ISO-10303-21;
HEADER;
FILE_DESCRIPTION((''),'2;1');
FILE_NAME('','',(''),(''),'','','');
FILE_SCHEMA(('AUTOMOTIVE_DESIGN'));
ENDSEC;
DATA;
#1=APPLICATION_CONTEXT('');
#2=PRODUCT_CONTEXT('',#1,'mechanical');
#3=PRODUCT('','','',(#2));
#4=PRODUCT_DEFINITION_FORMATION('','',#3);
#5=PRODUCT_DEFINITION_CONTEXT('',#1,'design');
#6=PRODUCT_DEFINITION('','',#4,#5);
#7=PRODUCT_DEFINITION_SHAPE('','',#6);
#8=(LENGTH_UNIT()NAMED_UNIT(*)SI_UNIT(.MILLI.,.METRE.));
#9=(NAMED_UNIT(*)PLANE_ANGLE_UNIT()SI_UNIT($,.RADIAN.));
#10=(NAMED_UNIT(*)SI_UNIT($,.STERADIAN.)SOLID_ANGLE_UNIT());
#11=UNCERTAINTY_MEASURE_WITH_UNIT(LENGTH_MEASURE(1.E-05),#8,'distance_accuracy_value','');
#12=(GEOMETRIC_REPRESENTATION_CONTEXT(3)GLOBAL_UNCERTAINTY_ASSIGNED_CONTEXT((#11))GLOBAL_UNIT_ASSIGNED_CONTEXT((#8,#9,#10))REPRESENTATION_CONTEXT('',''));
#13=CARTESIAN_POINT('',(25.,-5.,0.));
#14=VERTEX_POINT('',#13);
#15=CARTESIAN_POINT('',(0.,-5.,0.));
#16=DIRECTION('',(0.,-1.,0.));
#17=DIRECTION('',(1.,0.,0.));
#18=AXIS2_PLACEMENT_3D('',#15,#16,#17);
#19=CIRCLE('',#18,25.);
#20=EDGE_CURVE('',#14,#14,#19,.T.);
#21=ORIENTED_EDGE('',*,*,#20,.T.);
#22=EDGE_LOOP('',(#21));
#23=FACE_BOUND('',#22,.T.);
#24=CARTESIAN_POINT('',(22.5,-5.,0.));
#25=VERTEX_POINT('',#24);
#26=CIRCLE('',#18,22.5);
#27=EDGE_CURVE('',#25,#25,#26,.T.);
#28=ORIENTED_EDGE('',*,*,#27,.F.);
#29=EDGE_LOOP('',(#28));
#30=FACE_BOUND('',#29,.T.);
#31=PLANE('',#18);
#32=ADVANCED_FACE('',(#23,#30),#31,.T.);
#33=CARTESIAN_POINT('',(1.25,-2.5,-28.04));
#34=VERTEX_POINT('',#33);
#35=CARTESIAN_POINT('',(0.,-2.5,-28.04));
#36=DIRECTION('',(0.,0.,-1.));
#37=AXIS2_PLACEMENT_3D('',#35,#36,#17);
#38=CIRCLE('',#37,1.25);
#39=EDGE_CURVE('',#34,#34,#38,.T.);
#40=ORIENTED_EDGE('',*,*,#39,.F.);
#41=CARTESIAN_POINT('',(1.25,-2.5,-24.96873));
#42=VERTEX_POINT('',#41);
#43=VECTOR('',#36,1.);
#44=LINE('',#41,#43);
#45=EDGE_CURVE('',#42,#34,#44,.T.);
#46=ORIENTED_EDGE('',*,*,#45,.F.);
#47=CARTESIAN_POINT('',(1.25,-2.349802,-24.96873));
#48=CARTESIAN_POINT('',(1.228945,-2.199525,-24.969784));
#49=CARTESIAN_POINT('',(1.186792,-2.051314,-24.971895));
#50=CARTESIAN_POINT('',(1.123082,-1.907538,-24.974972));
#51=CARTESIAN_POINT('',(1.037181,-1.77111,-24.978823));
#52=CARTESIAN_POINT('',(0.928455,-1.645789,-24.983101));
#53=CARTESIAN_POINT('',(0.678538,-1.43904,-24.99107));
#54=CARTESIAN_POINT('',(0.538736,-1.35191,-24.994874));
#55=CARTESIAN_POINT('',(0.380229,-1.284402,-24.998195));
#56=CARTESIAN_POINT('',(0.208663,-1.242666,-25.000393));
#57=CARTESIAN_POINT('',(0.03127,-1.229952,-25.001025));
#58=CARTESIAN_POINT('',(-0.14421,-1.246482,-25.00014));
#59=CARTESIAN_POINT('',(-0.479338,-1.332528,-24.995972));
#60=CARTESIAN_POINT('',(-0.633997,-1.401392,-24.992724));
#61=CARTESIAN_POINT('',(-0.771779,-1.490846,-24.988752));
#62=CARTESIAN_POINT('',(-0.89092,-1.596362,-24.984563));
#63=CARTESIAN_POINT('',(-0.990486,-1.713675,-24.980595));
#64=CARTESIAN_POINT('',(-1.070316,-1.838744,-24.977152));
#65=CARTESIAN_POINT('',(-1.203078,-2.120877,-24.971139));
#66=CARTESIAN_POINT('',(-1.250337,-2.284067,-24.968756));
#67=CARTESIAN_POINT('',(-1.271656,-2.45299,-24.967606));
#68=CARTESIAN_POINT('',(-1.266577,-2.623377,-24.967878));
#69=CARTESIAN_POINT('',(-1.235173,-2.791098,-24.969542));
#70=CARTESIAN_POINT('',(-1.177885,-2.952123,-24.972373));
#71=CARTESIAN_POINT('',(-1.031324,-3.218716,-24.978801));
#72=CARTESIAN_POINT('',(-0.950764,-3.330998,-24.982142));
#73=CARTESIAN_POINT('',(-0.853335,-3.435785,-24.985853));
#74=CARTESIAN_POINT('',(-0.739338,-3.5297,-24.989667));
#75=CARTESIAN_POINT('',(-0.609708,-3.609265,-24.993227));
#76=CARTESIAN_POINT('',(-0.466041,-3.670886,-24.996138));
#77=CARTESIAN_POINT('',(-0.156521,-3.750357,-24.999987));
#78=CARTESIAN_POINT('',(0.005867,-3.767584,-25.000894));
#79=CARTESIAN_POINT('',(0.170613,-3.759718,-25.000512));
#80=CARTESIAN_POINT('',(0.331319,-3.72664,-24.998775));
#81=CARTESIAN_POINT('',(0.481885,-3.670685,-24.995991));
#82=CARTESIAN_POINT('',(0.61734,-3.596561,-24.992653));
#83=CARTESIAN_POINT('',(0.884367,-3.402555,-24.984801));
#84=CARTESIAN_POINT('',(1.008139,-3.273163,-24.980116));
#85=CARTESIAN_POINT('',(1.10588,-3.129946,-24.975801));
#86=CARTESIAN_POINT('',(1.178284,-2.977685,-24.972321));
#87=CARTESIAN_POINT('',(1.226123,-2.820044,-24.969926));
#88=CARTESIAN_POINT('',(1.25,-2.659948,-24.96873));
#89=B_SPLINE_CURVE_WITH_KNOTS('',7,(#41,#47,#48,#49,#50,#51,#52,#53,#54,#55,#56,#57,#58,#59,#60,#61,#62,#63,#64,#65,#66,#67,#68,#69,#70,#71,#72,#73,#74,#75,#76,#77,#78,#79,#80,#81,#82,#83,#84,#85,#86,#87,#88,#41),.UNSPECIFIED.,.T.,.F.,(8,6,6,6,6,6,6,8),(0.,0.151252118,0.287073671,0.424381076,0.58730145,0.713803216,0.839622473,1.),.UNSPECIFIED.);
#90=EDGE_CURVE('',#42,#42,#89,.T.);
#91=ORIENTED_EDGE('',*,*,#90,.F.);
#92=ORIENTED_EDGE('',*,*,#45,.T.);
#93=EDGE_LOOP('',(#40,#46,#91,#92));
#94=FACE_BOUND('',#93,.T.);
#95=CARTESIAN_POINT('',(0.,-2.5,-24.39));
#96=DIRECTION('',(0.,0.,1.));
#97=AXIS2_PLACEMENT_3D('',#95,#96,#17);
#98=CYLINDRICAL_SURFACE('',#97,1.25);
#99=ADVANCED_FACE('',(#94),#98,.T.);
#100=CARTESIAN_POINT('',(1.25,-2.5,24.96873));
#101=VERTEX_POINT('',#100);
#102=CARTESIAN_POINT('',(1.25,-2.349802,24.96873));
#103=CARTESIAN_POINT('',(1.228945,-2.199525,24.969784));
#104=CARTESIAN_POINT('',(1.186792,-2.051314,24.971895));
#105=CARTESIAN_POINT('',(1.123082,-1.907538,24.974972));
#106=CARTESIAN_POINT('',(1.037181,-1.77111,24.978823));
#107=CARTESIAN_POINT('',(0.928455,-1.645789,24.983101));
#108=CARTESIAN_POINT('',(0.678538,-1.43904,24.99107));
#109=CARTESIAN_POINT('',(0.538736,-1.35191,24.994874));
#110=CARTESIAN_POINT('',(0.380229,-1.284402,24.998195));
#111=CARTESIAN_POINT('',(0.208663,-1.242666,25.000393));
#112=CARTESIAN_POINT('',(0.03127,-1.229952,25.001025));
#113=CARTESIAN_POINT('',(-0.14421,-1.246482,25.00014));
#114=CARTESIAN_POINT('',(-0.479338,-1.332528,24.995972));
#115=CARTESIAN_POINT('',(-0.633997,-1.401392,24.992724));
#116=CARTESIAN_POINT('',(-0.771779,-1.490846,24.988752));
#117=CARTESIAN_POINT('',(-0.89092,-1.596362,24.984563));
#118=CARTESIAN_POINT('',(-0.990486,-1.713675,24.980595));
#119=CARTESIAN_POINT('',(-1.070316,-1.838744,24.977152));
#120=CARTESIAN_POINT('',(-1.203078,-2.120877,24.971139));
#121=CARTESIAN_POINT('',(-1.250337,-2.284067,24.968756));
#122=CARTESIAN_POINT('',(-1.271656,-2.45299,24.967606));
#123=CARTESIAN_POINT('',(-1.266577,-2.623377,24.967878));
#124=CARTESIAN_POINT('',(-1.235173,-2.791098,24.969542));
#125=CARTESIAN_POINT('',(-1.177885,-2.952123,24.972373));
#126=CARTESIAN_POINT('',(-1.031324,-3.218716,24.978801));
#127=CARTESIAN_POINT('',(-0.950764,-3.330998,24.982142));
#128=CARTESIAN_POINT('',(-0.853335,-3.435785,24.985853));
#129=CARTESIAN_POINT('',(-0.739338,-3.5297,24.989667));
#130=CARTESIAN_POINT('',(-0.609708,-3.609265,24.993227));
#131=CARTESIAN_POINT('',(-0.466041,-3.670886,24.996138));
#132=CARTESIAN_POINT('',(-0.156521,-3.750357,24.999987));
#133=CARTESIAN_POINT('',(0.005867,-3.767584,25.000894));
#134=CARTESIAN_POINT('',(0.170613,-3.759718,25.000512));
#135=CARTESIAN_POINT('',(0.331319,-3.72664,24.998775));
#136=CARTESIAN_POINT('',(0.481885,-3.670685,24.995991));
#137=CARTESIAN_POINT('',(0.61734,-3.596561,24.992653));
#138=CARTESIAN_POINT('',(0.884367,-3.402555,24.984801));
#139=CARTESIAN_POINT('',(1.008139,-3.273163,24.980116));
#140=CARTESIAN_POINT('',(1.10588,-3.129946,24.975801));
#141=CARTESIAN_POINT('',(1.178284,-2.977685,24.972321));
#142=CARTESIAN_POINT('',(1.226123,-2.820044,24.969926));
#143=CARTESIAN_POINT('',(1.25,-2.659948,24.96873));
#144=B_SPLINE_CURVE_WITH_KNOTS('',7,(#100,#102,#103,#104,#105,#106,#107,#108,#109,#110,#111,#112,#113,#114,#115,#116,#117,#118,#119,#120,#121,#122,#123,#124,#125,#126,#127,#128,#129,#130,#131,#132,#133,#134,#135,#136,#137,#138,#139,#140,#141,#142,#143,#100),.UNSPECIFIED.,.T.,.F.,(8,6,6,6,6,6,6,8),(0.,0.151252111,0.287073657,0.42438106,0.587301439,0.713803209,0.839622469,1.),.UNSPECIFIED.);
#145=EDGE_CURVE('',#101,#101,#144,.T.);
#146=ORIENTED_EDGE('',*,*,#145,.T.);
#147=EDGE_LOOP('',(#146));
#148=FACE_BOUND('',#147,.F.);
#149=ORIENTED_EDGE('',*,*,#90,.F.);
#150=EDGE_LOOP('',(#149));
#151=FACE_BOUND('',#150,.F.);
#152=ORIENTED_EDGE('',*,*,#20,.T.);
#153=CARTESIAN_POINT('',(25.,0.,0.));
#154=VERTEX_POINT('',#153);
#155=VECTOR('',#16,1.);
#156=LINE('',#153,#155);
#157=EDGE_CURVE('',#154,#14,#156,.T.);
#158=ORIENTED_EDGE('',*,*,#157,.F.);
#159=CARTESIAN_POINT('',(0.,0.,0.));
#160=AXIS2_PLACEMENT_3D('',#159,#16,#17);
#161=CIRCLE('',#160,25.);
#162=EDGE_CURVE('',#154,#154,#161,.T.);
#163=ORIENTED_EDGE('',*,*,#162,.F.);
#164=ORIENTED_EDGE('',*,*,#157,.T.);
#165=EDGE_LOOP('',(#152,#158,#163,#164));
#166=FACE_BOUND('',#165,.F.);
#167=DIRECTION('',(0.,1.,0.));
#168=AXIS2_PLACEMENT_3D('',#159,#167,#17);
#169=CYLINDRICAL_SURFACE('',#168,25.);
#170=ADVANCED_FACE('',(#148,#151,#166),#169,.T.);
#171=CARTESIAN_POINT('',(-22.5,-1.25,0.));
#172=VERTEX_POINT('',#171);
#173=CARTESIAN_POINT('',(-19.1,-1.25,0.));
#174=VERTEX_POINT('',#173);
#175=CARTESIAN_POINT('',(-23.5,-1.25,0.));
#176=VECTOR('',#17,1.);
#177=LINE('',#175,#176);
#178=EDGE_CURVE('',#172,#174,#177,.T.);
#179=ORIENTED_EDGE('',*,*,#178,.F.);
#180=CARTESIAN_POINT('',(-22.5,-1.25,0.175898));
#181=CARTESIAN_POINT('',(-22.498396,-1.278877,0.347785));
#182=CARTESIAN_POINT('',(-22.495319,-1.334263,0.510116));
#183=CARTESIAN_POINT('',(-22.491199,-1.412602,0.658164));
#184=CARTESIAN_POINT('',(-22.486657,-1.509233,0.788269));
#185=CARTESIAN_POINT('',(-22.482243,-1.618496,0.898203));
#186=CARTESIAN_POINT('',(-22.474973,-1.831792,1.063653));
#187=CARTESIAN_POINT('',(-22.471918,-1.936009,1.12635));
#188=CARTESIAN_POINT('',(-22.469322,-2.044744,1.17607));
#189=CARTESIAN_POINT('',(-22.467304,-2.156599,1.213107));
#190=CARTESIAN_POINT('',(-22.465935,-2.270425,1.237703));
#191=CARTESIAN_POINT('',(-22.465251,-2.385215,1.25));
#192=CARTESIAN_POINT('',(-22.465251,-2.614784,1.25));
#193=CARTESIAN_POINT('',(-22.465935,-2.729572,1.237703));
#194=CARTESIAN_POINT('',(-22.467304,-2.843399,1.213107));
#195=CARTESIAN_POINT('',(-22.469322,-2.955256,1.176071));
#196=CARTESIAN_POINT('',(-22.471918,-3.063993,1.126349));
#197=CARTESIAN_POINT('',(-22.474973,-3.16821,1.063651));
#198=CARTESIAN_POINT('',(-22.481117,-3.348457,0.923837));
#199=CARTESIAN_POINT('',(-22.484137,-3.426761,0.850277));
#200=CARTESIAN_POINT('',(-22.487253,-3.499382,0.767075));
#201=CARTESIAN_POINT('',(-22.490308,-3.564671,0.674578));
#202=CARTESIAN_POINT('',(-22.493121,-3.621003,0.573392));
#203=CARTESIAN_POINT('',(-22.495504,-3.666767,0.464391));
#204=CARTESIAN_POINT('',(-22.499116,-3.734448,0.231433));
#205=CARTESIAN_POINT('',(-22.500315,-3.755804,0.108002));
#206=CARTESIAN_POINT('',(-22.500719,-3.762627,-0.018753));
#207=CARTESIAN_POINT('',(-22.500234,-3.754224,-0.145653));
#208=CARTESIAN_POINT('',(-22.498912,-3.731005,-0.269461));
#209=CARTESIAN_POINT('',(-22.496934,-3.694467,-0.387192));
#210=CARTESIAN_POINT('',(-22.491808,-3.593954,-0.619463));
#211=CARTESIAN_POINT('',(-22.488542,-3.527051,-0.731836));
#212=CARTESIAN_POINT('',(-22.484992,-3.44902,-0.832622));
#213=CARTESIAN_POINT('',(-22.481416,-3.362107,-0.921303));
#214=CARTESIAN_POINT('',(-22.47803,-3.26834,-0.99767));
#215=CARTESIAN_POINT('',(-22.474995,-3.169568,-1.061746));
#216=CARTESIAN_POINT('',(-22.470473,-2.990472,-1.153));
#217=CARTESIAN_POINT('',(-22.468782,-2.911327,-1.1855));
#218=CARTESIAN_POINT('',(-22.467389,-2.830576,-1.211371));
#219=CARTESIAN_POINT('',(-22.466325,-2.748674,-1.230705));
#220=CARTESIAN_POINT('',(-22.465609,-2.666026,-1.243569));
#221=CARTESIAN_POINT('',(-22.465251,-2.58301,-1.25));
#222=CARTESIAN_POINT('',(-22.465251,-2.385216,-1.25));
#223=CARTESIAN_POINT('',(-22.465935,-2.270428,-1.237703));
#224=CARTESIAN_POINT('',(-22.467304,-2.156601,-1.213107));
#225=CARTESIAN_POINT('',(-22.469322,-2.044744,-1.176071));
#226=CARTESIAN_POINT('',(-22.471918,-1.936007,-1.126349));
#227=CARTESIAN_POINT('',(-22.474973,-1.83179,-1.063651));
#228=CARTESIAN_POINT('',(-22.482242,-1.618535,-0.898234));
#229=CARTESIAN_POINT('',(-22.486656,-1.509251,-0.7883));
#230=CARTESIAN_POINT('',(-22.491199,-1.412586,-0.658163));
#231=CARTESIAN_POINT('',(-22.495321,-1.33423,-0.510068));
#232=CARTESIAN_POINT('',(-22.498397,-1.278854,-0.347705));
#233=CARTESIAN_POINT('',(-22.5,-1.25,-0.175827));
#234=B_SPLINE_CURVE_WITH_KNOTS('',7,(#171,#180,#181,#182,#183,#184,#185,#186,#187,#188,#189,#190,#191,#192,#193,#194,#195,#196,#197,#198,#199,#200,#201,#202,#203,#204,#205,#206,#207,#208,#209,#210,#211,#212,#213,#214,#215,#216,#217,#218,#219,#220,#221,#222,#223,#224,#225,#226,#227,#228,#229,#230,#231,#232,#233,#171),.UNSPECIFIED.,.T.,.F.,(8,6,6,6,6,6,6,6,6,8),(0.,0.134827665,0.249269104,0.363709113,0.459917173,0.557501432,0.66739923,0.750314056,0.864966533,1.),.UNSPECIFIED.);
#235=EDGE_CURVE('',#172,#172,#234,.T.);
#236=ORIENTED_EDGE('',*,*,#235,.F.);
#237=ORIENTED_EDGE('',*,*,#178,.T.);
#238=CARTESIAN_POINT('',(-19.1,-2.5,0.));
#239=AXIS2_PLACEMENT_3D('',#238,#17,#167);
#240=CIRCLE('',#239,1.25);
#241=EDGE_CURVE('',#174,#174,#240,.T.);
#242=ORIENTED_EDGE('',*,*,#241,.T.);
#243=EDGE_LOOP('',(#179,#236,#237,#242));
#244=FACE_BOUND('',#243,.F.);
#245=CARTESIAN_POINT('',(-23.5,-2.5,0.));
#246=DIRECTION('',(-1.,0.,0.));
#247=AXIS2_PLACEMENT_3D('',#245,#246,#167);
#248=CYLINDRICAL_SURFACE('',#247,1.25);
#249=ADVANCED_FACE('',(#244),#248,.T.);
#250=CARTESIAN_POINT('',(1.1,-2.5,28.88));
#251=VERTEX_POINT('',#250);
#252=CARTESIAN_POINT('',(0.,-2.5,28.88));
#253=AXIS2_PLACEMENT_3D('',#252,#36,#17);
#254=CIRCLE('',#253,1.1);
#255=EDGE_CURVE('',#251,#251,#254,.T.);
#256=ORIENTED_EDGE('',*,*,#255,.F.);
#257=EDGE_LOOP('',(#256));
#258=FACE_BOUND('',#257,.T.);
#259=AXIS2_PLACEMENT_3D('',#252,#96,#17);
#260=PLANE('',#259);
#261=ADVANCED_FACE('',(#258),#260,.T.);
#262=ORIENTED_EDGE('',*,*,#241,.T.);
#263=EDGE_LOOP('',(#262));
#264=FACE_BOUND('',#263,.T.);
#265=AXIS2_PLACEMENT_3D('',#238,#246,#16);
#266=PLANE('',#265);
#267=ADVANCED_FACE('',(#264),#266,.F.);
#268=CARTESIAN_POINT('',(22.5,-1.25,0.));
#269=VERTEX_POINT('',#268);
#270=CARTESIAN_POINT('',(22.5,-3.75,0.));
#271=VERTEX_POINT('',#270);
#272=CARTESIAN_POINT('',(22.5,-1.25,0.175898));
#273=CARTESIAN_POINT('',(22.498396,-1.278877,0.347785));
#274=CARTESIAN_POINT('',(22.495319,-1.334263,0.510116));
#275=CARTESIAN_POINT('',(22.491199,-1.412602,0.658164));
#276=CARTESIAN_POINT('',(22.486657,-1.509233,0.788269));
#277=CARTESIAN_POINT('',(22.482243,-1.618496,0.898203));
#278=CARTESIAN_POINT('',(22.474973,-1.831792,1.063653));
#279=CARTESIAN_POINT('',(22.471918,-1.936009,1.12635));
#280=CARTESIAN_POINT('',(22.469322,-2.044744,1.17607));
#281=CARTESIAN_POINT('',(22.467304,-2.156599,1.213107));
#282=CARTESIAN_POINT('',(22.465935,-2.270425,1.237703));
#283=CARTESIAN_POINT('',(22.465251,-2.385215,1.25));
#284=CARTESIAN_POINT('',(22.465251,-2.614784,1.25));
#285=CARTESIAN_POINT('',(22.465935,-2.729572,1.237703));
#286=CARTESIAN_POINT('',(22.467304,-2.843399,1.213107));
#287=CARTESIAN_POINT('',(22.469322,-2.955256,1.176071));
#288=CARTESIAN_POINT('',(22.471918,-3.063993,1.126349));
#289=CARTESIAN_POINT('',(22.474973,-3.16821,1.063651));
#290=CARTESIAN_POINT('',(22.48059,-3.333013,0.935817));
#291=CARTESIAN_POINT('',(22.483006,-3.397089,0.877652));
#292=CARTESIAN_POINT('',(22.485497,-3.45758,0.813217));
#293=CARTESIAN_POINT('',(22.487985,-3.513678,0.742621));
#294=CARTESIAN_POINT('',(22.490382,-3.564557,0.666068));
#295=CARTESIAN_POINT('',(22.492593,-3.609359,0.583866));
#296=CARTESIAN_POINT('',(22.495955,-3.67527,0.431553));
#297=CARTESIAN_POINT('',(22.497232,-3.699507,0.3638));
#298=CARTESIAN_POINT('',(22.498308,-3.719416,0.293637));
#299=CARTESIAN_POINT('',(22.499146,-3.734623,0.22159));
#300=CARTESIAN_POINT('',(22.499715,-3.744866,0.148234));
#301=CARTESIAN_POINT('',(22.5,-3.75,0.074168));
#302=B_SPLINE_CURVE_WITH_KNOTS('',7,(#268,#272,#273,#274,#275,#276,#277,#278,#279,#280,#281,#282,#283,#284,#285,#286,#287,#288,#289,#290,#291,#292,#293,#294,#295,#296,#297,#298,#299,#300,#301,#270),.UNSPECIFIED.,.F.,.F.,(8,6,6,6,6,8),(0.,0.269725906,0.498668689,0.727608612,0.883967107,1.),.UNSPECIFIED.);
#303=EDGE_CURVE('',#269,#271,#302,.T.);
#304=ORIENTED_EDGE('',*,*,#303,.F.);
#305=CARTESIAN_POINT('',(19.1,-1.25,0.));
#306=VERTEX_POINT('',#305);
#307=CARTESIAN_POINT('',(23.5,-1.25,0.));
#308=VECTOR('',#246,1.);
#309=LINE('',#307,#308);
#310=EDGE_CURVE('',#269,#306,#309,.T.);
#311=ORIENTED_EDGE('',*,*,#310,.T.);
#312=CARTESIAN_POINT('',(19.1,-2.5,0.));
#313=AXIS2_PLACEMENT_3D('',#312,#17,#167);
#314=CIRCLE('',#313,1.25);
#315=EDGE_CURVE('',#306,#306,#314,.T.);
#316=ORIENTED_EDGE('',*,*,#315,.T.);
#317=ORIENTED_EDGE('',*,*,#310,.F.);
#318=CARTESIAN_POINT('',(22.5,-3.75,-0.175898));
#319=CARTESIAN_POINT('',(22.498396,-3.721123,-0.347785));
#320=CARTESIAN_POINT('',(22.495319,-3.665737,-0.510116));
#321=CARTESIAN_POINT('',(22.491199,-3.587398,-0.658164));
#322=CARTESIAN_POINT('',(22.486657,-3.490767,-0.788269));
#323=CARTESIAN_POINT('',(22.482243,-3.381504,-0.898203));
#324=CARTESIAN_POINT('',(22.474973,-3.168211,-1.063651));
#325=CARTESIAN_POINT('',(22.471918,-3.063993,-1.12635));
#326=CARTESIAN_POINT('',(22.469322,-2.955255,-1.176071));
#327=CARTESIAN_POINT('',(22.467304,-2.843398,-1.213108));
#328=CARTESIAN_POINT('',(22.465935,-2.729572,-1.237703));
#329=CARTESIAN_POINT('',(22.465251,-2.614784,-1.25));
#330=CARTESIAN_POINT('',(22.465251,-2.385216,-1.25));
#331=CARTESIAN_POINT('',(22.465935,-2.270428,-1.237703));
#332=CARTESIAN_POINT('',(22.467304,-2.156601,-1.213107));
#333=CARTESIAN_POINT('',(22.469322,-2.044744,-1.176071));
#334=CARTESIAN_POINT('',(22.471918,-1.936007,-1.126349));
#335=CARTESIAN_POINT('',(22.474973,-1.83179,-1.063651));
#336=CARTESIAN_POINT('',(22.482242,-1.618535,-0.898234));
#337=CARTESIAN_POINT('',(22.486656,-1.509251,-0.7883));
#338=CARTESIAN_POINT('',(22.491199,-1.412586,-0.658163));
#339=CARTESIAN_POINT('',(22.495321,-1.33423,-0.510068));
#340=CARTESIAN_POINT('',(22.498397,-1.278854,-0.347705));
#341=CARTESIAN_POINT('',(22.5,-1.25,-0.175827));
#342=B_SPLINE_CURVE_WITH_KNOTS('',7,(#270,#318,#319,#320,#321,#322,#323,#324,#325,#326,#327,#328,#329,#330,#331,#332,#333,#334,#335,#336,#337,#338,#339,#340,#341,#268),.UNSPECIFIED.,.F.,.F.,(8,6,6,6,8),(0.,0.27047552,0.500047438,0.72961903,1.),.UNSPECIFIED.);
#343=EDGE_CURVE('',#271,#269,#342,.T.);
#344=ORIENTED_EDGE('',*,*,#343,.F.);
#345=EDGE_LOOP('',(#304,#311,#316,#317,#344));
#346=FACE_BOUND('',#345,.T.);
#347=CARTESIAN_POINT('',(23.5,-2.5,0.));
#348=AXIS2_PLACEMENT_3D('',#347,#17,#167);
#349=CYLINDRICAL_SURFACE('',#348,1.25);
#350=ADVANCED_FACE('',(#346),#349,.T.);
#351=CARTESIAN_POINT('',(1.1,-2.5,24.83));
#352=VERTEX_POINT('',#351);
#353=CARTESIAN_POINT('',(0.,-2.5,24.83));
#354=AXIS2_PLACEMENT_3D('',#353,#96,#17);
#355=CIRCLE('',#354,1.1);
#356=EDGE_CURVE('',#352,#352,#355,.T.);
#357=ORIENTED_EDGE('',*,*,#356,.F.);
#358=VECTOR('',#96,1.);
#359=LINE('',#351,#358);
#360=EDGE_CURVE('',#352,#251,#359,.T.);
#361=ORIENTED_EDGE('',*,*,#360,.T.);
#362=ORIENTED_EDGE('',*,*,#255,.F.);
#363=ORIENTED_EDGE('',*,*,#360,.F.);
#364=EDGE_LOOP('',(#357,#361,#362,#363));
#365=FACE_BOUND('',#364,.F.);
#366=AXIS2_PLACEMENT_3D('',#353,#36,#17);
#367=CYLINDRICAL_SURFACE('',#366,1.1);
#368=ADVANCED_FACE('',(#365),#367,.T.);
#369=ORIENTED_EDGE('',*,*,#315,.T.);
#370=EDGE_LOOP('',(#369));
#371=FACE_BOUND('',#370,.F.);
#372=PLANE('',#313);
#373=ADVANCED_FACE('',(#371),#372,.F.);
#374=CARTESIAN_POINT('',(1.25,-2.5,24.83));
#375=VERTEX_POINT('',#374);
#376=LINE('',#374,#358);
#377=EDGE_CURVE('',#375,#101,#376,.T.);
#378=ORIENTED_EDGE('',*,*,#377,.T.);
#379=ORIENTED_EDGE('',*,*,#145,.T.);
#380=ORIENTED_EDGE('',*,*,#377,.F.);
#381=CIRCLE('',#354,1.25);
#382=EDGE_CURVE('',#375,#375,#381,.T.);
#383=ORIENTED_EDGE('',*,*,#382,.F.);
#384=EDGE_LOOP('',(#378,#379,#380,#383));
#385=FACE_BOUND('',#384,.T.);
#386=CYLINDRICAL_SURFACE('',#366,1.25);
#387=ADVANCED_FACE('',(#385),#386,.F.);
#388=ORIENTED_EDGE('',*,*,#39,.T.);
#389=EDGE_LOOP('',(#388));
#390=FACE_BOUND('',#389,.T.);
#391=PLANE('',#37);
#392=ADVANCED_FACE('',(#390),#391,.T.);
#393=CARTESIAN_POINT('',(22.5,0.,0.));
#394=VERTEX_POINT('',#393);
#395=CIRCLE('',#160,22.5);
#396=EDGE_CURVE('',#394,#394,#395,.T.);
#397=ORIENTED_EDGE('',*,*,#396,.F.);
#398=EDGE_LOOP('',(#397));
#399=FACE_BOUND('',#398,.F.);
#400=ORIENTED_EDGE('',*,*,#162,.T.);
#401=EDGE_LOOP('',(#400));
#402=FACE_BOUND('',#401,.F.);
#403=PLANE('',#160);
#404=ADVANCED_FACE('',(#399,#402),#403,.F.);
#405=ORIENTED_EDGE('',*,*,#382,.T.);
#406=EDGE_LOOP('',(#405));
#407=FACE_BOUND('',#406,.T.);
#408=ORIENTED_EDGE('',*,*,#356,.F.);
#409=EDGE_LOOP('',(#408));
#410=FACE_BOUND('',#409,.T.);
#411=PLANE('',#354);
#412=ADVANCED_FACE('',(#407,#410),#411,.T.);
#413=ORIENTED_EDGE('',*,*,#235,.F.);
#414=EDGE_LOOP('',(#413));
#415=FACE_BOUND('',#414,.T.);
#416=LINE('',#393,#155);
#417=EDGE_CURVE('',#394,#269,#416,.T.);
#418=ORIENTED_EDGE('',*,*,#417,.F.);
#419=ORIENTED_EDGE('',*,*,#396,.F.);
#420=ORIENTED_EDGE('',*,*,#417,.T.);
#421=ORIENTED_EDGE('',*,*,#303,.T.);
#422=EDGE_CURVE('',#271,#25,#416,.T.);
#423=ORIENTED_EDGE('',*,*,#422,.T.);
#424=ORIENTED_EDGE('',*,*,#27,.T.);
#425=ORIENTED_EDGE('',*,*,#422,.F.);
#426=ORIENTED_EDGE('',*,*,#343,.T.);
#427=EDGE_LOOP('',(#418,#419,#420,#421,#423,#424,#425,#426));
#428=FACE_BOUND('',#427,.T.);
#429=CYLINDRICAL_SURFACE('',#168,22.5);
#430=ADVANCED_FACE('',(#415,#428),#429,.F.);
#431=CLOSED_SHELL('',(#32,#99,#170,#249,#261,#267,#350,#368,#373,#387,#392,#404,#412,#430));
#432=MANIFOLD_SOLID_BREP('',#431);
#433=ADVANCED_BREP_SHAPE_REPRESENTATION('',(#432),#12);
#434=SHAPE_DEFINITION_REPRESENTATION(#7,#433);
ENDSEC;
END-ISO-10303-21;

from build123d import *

# Parameters (mm, degrees)
F0_R      = 25
F0_R_2    = 22.5
F1_DEPTH  = 5
F3_R      = 1.25
F4_DEPTH  = 3.8
F6_R      = 1.25
F7_DEPTH  = 3.4
F8_R      = 1.25
F9_DEPTH  = 0.25
F10_R     = 1.25
F11_DEPTH = 0.25
F13_R     = 1.25
F13_R_2   = 1.1
F14_DEPTH = 25
F16_R     = 1.25
F17_DEPTH = 4.4


# Not quite as in the source:
# - a pattern or mirror of a feature is missing from the dataset's text; its kind, count and spacing are read off the source's solid


with BuildPart() as f1:
    # F0 (on Front) → F1 (new body)
    with BuildSketch(Plane.XZ):
        Circle(F0_R)
        Circle(F0_R_2, mode=Mode.SUBTRACT)
    extrude(amount=F1_DEPTH)

    # F3 (on offset) → F4 (join)
    with BuildSketch(Plane.XY.offset(24.83)):
        with Locations((0, -2.5)):
            Circle(F3_R)
    extrude(amount=F4_DEPTH)

    # F6 (on offset) → F7 (join)
    with BuildSketch(Plane.XY.offset(-24.39)):
        with Locations((0, -2.5)):
            Circle(F6_R)
    extrude(amount=-F7_DEPTH)

    # F8 (on face) → F9 (join)
    with BuildSketch(Plane(origin=(0, 0, -27.79), x_dir=(1, 0, 0), z_dir=(0, 0, -1))):
        with Locations((0, 2.5)):
            Circle(F8_R)
    extrude(amount=F9_DEPTH)

    # F10 (on face) → F11 (join)
    with BuildSketch(Plane.XY.offset(28.63)):
        with Locations((0, -2.5)):
            Circle(F10_R)
    extrude(amount=F11_DEPTH)

    # F13 (on offset) → F14 (cut)
    with BuildSketch(Plane.XY.offset(24.83)):
        with Locations((0, -2.5)):
            Circle(F13_R)
        with Locations((0, -2.5)):
            Circle(F13_R_2, mode=Mode.SUBTRACT)
    extrude(amount=F14_DEPTH, mode=Mode.SUBTRACT)

    # F16 (on offset) → F17 (join)
    with BuildSketch(Plane.YZ.offset(23.5)):
        with Locations((-2.5, 0)):
            Circle(F16_R)
    f17 = extrude(amount=-F17_DEPTH)

    # F17_copies: F17 across plane
    add(f17.mirror(Plane(origin=(0, 0, 0), x_dir=(0, 0, -1), z_dir=(-1, 0, 0))))


solid = f1.part
